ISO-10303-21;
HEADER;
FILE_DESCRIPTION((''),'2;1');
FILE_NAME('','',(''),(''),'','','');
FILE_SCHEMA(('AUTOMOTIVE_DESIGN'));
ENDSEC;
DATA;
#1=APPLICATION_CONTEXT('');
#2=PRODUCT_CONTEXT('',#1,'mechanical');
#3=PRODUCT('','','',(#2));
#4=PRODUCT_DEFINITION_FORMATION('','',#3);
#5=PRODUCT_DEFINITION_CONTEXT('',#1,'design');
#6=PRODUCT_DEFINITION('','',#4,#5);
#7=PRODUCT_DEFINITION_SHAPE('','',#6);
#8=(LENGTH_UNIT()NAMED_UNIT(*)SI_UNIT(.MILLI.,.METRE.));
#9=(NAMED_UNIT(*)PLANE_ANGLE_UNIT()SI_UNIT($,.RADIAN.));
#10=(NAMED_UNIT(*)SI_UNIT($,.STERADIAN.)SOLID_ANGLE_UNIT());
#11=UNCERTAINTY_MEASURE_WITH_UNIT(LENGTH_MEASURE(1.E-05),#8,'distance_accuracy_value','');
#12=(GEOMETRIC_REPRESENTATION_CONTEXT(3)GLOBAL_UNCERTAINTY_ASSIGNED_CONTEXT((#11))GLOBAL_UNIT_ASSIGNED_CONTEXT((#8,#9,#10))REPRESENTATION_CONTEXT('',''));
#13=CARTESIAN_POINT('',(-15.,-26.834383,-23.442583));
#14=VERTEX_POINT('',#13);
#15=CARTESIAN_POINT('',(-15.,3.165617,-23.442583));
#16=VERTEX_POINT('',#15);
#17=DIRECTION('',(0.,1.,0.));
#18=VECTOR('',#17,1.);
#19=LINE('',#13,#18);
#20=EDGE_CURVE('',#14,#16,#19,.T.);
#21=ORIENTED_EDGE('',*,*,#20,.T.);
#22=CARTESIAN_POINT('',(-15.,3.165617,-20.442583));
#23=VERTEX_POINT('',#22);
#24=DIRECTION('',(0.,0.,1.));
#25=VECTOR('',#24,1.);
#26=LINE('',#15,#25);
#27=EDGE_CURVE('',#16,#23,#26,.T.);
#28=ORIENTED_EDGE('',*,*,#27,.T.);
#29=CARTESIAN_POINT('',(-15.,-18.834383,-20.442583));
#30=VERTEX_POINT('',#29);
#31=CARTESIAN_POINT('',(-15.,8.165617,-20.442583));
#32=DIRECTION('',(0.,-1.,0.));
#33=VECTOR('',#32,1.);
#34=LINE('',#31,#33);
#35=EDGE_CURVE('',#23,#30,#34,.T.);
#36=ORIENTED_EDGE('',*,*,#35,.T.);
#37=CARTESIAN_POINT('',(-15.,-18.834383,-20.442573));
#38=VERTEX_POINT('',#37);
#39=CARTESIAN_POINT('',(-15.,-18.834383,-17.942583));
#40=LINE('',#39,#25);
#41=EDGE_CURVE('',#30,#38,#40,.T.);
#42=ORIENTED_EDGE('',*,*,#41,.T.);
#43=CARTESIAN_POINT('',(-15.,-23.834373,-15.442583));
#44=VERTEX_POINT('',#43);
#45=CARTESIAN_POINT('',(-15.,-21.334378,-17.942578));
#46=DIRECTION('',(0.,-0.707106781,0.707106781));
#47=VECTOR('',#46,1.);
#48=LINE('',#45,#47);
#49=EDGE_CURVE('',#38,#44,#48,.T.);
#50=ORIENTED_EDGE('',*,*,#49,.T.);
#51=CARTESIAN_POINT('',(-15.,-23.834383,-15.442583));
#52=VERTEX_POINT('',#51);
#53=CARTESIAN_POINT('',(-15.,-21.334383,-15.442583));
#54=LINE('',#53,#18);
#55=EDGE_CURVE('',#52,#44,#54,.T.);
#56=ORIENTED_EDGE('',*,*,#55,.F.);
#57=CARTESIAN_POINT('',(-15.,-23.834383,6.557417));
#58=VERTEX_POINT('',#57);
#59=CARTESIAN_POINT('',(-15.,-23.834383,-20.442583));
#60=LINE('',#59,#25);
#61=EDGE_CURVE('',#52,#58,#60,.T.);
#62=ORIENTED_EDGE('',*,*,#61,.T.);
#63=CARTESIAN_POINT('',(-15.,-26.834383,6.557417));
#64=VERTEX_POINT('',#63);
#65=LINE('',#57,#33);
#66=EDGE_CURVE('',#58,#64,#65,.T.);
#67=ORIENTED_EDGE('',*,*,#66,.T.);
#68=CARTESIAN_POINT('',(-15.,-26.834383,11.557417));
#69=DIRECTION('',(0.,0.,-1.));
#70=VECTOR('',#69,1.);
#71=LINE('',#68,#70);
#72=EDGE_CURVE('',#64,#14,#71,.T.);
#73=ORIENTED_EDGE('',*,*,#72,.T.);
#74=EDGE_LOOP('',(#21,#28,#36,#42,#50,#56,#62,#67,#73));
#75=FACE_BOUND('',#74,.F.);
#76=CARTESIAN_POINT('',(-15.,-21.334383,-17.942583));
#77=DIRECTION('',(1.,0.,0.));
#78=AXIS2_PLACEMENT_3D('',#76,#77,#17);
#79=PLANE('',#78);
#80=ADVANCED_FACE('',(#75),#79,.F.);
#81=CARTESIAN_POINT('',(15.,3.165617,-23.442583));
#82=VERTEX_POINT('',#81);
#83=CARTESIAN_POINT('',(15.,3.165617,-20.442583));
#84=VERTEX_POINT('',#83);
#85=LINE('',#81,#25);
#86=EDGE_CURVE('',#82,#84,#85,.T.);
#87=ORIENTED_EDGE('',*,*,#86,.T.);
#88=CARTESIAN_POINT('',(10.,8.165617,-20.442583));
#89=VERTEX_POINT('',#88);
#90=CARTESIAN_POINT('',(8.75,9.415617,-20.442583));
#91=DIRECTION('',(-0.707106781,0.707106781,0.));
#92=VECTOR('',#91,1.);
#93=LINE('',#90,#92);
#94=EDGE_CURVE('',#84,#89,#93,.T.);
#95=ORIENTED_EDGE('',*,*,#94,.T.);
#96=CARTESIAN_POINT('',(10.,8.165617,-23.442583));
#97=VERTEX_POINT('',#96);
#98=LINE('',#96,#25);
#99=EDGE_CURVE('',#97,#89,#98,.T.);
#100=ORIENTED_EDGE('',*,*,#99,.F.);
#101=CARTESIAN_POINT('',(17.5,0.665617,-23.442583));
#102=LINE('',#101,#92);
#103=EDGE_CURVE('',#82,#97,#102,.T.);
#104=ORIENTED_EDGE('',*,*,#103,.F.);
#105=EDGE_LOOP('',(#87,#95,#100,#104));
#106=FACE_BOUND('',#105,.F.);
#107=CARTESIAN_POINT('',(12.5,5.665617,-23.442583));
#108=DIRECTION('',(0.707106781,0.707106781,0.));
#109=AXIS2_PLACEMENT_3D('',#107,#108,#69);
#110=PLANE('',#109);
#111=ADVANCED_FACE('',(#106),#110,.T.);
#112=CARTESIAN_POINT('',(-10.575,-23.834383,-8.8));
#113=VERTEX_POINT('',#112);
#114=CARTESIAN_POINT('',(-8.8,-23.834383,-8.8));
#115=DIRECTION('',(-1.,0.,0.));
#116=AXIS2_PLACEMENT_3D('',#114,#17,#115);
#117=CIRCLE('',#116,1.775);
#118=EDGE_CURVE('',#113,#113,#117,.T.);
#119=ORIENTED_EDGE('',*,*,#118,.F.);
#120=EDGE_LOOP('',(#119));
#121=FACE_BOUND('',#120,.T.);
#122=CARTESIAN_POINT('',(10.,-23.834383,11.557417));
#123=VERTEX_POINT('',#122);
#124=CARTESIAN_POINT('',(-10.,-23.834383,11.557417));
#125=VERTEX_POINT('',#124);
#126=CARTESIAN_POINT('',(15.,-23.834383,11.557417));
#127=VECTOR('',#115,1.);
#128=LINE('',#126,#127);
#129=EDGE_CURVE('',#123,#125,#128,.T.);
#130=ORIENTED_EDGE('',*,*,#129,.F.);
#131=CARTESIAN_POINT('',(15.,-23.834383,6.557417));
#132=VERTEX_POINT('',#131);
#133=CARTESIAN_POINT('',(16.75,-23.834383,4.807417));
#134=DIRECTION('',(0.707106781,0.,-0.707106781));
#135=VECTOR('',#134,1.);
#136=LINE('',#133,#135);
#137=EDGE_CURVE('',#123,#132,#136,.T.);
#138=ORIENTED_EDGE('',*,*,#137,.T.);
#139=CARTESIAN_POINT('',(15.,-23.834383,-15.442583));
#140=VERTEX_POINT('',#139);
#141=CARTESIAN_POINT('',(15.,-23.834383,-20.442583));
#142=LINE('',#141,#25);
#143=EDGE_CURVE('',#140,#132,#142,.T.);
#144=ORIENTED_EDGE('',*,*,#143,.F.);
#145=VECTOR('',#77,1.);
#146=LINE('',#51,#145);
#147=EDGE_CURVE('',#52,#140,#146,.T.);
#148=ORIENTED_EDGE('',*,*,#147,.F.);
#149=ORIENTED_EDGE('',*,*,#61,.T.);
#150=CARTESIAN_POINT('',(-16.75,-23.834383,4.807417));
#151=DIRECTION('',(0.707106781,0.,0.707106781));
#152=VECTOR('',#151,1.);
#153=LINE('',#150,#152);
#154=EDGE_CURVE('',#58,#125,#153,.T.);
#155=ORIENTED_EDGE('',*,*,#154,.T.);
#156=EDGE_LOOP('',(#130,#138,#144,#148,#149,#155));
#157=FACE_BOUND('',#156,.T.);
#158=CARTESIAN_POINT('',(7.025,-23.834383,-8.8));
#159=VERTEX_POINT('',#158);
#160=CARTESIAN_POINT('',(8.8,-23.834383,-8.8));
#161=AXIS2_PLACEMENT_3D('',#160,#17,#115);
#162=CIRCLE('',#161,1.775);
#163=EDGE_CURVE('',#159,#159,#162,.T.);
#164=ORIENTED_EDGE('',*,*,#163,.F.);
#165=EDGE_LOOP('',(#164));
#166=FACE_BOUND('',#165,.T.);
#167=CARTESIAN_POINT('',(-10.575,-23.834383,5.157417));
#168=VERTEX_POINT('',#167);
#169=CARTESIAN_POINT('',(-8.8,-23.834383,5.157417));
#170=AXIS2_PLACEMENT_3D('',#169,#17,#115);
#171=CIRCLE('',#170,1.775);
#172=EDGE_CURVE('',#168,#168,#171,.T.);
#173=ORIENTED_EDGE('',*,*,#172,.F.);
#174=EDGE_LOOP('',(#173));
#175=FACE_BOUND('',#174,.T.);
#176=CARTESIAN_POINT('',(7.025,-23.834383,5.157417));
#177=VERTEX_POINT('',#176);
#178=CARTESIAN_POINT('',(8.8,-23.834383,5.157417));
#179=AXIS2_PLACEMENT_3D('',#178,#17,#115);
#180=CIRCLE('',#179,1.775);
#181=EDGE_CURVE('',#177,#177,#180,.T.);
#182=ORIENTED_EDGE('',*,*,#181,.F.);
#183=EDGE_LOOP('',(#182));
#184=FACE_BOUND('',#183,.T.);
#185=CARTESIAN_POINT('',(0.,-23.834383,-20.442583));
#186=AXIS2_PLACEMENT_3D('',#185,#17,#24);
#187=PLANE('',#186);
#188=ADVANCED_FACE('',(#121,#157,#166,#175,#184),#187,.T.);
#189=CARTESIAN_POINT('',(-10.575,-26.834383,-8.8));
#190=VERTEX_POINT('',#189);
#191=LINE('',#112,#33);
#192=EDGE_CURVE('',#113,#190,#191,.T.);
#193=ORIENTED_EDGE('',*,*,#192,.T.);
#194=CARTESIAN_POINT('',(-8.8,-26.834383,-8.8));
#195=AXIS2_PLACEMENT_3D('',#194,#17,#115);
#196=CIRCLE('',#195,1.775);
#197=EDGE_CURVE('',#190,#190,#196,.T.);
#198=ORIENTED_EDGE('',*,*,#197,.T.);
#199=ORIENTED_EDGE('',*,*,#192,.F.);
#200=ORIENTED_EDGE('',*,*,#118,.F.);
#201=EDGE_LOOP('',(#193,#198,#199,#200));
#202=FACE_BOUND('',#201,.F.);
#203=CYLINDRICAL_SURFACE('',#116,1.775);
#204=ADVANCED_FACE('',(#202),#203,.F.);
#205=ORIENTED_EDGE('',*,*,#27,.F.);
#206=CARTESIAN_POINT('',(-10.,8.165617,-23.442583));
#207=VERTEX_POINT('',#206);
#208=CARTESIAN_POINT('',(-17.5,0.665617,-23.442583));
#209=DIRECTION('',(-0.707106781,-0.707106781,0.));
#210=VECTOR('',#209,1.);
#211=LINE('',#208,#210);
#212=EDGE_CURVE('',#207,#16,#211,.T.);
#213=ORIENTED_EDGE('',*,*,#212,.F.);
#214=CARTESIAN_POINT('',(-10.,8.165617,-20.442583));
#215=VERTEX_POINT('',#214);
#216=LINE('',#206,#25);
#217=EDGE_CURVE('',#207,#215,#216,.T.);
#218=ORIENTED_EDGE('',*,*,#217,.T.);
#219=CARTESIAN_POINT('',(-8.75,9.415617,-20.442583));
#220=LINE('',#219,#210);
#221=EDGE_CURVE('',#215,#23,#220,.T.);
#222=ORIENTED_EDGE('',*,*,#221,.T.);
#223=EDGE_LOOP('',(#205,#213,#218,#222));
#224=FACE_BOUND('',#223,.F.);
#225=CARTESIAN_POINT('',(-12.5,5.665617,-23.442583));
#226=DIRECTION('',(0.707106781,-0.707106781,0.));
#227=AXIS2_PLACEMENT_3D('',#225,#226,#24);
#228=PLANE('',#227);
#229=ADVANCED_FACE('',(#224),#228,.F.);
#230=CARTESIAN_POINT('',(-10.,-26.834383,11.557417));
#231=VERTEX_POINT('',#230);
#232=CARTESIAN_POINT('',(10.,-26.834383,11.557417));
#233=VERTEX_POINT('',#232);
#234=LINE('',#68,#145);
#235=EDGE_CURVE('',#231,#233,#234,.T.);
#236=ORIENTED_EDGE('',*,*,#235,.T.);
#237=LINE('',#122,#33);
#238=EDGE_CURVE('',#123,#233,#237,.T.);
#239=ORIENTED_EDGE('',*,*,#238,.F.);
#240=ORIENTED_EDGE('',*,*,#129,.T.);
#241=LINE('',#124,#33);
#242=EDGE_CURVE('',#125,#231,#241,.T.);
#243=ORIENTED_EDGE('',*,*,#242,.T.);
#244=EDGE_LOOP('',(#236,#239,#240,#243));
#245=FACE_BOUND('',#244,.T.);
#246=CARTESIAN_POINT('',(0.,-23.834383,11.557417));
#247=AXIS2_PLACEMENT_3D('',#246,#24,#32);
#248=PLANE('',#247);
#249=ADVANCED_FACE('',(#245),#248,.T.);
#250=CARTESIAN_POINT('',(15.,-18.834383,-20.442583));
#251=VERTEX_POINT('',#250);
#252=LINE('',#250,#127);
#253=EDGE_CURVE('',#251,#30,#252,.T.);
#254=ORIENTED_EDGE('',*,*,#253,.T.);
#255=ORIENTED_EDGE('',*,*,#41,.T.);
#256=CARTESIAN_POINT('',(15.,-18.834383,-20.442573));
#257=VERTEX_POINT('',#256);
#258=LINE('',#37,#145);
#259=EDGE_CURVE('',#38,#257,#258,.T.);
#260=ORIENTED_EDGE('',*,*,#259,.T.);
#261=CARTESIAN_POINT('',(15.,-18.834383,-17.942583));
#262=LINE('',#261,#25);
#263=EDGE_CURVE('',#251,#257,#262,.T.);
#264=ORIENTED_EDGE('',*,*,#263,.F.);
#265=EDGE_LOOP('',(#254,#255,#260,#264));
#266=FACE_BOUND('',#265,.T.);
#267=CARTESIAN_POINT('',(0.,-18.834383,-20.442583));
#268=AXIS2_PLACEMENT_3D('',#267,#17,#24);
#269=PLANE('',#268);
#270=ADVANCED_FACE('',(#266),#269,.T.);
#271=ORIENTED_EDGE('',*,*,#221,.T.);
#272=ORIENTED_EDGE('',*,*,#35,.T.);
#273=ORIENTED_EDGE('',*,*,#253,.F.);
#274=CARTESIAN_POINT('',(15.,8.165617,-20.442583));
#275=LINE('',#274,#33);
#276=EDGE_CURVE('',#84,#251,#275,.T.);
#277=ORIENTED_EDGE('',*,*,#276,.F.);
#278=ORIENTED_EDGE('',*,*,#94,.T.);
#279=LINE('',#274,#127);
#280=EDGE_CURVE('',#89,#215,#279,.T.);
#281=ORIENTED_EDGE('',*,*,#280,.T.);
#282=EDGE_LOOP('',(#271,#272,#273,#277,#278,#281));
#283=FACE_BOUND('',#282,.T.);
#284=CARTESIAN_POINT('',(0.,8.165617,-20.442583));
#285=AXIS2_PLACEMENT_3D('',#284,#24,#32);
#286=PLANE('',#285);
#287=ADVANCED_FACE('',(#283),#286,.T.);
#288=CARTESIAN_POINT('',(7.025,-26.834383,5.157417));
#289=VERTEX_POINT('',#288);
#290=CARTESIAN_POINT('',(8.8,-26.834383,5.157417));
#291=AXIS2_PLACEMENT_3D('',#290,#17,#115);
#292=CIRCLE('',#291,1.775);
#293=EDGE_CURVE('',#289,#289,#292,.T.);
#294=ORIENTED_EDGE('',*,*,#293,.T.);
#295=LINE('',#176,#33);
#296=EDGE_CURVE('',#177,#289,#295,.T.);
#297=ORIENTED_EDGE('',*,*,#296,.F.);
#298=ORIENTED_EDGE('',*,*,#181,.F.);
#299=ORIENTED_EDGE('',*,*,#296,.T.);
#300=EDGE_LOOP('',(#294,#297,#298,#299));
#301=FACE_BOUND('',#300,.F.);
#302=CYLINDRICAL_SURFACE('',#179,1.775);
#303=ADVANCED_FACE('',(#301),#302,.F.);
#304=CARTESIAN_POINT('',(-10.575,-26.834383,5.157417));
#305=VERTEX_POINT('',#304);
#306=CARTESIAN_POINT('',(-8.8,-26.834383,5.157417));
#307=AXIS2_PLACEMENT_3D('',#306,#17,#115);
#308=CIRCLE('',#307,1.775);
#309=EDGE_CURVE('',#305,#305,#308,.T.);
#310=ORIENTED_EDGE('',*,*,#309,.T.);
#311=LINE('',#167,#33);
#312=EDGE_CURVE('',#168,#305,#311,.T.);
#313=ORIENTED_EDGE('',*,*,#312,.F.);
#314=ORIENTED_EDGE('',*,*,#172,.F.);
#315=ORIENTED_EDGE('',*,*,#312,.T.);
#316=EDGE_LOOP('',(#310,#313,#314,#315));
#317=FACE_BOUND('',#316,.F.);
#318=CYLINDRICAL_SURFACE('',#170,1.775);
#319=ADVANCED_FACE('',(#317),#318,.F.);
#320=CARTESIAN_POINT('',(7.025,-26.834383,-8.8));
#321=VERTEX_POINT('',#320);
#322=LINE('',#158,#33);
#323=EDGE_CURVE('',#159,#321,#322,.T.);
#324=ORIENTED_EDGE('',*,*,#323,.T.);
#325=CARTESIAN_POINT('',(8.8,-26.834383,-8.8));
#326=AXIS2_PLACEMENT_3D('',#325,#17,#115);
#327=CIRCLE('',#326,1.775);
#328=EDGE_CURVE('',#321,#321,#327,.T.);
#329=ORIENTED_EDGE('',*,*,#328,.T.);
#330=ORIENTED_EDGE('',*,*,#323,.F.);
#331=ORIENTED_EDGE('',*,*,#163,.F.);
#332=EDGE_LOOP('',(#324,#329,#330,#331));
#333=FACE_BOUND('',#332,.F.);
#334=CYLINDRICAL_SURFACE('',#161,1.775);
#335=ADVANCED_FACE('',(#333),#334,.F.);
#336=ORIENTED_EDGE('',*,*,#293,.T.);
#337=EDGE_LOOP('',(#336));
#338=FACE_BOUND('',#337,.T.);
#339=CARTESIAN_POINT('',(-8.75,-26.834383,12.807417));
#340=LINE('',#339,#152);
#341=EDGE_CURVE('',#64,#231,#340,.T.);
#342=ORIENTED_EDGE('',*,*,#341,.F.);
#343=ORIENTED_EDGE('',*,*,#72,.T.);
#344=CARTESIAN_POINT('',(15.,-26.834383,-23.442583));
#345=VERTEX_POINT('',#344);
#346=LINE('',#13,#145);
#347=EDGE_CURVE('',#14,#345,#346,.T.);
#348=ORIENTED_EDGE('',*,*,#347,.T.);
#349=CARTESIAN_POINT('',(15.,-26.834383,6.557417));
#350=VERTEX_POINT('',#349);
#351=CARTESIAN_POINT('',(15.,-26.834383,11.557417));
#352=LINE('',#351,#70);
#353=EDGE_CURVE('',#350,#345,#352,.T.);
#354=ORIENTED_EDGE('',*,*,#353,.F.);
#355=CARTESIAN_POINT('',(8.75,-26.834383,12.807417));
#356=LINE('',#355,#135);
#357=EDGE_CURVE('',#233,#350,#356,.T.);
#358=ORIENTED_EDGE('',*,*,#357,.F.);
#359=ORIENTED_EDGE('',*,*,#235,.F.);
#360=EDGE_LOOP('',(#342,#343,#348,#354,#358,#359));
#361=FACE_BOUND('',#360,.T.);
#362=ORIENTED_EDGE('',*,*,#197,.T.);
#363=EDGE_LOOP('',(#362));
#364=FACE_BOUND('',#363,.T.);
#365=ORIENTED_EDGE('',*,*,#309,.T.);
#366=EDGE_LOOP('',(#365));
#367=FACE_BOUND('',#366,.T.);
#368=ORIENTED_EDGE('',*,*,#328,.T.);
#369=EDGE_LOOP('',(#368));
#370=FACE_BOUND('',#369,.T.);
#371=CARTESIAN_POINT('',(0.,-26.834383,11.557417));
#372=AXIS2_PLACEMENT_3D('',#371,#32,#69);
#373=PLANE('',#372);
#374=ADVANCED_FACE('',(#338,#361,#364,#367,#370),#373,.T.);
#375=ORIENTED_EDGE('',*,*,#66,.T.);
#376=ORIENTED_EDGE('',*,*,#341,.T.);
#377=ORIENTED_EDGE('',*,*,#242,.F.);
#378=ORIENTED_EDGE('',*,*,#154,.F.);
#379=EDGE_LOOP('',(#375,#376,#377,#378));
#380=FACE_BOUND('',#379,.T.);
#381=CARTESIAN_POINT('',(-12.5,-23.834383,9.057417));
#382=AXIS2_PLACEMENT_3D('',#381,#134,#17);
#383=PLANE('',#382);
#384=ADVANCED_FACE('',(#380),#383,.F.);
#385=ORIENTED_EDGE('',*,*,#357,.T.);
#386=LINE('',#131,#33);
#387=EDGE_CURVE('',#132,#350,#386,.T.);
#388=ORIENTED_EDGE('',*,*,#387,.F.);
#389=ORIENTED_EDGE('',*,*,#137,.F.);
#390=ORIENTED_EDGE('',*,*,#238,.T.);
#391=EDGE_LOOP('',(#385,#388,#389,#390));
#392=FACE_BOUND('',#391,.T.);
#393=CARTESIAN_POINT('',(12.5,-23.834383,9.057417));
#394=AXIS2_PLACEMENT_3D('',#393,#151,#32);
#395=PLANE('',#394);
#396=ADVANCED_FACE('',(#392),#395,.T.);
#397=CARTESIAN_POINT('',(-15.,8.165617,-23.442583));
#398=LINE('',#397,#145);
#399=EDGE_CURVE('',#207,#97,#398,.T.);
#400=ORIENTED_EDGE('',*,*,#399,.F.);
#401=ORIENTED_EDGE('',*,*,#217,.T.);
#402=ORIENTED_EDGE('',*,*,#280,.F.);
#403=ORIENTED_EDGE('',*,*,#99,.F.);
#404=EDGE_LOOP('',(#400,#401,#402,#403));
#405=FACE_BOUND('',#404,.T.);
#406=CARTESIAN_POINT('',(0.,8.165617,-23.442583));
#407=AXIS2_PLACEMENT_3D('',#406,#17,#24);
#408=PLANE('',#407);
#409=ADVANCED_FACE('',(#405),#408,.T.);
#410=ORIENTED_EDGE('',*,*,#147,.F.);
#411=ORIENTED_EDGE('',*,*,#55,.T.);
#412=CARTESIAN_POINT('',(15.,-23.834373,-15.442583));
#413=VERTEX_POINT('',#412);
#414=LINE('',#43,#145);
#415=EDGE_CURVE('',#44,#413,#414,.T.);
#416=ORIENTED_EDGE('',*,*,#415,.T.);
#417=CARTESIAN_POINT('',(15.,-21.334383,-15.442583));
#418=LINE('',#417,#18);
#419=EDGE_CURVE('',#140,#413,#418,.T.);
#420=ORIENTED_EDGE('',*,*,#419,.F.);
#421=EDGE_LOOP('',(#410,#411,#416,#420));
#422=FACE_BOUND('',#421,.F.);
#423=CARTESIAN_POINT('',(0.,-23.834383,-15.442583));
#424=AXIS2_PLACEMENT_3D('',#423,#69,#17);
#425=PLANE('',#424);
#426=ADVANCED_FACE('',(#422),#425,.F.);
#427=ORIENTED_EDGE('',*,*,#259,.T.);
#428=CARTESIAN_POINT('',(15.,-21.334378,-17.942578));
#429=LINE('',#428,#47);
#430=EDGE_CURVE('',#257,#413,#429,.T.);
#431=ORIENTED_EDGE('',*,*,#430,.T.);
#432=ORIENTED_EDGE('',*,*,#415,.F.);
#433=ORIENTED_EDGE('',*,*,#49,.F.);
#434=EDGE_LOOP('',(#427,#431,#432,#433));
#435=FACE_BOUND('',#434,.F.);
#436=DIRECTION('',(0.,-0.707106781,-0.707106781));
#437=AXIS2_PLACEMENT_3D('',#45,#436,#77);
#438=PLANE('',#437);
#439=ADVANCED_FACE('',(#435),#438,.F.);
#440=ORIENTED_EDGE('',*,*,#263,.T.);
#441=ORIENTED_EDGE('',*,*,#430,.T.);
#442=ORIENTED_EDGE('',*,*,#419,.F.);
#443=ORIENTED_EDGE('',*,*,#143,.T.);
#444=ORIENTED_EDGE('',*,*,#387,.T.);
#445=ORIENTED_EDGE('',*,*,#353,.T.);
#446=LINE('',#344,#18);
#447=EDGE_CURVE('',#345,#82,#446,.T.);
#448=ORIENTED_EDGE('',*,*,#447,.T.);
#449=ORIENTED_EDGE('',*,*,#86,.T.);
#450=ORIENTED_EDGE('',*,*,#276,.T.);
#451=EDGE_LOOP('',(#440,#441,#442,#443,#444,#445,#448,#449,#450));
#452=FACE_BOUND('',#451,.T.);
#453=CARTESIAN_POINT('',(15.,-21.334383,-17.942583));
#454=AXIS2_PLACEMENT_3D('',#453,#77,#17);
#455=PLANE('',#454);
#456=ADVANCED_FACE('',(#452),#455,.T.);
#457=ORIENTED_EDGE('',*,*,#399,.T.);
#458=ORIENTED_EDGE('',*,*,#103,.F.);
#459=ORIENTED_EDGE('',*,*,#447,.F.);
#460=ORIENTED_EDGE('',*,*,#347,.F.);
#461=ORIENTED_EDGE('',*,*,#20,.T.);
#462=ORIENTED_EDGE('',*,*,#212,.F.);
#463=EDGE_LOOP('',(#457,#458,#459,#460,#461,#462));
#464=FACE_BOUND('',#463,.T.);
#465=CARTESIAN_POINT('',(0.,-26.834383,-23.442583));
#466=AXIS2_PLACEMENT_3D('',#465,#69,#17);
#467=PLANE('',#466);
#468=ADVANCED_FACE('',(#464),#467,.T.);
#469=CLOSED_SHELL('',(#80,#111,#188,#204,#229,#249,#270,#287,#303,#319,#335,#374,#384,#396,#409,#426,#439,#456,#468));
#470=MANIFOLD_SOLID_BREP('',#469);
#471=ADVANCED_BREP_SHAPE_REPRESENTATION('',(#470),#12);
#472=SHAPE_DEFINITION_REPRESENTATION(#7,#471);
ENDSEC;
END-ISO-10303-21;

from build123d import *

# Parameters (mm, degrees)
F1_DEPTH      = 15
F1_DEPTH_BACK = 15
F2_R          = 1.775
F3_DEPTH      = 25
F4_W          = 5
F4_H          = 5
F5_DEPTH      = 15
F5_DEPTH_BACK = 15
F6_SIZE       = 4.99999
F7_SIZE       = 5
F8_SIZE       = 5
F9_SIZE       = 5
F10_SIZE      = 5


# Not quite as in the source:
# - a fillet or chamfer is up to 0.001 mm smaller than in the source, because OpenCascade refuses the exact size


with BuildPart() as f1:
    # F0 (on Right) → F1 (new body, two sides)
    with BuildSketch(Plane.YZ) as f1_sk:
        Polygon((-23.8343827544, 11.557416933), (-26.8343827544, 11.557416933), (-26.8343827544, -23.442583067), (8.1656172456, -23.442583067), (8.1656172456, -20.442583067), (-23.8343827544, -20.442583067), align=None)
    extrude(amount=F1_DEPTH)
    extrude(f1_sk.sketch, amount=-F1_DEPTH_BACK)

    # F2 (on face) → F3 (cut)
    with BuildSketch(Plane(origin=(0, -23.8343827544, 0), x_dir=(-1, 0, 0), z_dir=(0, 1, 0))):
        with Locations((-8.8, 5.157416933)):
            Circle(F2_R)
        with Locations((8.8, 5.157416933)):
            Circle(F2_R)
        with Locations((8.8, -8.8)):
            Circle(F2_R)
        with Locations((-8.8, -8.8)):
            Circle(F2_R)
    extrude(amount=-F3_DEPTH, mode=Mode.SUBTRACT)

    # F4 (on Right) → F5 (join, two sides)
    with BuildSketch(Plane.YZ) as f5_sk:
        with Locations((-21.3343827544, -17.942583067)):
            Rectangle(F4_W, F4_H)
    extrude(amount=F5_DEPTH)
    extrude(f5_sk.sketch, amount=-F5_DEPTH_BACK)

    # F6 (size 5 in the source; OpenCascade refuses exactly that, so slightly less here)
    f6_edges = [f1.edges().sort_by_distance(p)[0] for p in [
        (0, -18.834383, -15.442583),
    ]]
    chamfer(f6_edges, length=F6_SIZE)

    # F7
    f7_edges = [f1.edges().sort_by_distance(p)[0] for p in [
        (-15, -25.334383, 11.557417),
    ]]
    chamfer(f7_edges, length=F7_SIZE)

    # F8
    f8_edges = [f1.edges().sort_by_distance(p)[0] for p in [
        (15, -25.334383, 11.557417),
    ]]
    chamfer(f8_edges, length=F8_SIZE)

    # F9
    f9_edges = [f1.edges().sort_by_distance(p)[0] for p in [
        (15, 8.165617, -21.942583),
    ]]
    chamfer(f9_edges, length=F9_SIZE)

    # F10
    f10_edges = [f1.edges().sort_by_distance(p)[0] for p in [
        (-15, 8.165617, -21.942583),
    ]]
    chamfer(f10_edges, length=F10_SIZE)


solid = f1.part
